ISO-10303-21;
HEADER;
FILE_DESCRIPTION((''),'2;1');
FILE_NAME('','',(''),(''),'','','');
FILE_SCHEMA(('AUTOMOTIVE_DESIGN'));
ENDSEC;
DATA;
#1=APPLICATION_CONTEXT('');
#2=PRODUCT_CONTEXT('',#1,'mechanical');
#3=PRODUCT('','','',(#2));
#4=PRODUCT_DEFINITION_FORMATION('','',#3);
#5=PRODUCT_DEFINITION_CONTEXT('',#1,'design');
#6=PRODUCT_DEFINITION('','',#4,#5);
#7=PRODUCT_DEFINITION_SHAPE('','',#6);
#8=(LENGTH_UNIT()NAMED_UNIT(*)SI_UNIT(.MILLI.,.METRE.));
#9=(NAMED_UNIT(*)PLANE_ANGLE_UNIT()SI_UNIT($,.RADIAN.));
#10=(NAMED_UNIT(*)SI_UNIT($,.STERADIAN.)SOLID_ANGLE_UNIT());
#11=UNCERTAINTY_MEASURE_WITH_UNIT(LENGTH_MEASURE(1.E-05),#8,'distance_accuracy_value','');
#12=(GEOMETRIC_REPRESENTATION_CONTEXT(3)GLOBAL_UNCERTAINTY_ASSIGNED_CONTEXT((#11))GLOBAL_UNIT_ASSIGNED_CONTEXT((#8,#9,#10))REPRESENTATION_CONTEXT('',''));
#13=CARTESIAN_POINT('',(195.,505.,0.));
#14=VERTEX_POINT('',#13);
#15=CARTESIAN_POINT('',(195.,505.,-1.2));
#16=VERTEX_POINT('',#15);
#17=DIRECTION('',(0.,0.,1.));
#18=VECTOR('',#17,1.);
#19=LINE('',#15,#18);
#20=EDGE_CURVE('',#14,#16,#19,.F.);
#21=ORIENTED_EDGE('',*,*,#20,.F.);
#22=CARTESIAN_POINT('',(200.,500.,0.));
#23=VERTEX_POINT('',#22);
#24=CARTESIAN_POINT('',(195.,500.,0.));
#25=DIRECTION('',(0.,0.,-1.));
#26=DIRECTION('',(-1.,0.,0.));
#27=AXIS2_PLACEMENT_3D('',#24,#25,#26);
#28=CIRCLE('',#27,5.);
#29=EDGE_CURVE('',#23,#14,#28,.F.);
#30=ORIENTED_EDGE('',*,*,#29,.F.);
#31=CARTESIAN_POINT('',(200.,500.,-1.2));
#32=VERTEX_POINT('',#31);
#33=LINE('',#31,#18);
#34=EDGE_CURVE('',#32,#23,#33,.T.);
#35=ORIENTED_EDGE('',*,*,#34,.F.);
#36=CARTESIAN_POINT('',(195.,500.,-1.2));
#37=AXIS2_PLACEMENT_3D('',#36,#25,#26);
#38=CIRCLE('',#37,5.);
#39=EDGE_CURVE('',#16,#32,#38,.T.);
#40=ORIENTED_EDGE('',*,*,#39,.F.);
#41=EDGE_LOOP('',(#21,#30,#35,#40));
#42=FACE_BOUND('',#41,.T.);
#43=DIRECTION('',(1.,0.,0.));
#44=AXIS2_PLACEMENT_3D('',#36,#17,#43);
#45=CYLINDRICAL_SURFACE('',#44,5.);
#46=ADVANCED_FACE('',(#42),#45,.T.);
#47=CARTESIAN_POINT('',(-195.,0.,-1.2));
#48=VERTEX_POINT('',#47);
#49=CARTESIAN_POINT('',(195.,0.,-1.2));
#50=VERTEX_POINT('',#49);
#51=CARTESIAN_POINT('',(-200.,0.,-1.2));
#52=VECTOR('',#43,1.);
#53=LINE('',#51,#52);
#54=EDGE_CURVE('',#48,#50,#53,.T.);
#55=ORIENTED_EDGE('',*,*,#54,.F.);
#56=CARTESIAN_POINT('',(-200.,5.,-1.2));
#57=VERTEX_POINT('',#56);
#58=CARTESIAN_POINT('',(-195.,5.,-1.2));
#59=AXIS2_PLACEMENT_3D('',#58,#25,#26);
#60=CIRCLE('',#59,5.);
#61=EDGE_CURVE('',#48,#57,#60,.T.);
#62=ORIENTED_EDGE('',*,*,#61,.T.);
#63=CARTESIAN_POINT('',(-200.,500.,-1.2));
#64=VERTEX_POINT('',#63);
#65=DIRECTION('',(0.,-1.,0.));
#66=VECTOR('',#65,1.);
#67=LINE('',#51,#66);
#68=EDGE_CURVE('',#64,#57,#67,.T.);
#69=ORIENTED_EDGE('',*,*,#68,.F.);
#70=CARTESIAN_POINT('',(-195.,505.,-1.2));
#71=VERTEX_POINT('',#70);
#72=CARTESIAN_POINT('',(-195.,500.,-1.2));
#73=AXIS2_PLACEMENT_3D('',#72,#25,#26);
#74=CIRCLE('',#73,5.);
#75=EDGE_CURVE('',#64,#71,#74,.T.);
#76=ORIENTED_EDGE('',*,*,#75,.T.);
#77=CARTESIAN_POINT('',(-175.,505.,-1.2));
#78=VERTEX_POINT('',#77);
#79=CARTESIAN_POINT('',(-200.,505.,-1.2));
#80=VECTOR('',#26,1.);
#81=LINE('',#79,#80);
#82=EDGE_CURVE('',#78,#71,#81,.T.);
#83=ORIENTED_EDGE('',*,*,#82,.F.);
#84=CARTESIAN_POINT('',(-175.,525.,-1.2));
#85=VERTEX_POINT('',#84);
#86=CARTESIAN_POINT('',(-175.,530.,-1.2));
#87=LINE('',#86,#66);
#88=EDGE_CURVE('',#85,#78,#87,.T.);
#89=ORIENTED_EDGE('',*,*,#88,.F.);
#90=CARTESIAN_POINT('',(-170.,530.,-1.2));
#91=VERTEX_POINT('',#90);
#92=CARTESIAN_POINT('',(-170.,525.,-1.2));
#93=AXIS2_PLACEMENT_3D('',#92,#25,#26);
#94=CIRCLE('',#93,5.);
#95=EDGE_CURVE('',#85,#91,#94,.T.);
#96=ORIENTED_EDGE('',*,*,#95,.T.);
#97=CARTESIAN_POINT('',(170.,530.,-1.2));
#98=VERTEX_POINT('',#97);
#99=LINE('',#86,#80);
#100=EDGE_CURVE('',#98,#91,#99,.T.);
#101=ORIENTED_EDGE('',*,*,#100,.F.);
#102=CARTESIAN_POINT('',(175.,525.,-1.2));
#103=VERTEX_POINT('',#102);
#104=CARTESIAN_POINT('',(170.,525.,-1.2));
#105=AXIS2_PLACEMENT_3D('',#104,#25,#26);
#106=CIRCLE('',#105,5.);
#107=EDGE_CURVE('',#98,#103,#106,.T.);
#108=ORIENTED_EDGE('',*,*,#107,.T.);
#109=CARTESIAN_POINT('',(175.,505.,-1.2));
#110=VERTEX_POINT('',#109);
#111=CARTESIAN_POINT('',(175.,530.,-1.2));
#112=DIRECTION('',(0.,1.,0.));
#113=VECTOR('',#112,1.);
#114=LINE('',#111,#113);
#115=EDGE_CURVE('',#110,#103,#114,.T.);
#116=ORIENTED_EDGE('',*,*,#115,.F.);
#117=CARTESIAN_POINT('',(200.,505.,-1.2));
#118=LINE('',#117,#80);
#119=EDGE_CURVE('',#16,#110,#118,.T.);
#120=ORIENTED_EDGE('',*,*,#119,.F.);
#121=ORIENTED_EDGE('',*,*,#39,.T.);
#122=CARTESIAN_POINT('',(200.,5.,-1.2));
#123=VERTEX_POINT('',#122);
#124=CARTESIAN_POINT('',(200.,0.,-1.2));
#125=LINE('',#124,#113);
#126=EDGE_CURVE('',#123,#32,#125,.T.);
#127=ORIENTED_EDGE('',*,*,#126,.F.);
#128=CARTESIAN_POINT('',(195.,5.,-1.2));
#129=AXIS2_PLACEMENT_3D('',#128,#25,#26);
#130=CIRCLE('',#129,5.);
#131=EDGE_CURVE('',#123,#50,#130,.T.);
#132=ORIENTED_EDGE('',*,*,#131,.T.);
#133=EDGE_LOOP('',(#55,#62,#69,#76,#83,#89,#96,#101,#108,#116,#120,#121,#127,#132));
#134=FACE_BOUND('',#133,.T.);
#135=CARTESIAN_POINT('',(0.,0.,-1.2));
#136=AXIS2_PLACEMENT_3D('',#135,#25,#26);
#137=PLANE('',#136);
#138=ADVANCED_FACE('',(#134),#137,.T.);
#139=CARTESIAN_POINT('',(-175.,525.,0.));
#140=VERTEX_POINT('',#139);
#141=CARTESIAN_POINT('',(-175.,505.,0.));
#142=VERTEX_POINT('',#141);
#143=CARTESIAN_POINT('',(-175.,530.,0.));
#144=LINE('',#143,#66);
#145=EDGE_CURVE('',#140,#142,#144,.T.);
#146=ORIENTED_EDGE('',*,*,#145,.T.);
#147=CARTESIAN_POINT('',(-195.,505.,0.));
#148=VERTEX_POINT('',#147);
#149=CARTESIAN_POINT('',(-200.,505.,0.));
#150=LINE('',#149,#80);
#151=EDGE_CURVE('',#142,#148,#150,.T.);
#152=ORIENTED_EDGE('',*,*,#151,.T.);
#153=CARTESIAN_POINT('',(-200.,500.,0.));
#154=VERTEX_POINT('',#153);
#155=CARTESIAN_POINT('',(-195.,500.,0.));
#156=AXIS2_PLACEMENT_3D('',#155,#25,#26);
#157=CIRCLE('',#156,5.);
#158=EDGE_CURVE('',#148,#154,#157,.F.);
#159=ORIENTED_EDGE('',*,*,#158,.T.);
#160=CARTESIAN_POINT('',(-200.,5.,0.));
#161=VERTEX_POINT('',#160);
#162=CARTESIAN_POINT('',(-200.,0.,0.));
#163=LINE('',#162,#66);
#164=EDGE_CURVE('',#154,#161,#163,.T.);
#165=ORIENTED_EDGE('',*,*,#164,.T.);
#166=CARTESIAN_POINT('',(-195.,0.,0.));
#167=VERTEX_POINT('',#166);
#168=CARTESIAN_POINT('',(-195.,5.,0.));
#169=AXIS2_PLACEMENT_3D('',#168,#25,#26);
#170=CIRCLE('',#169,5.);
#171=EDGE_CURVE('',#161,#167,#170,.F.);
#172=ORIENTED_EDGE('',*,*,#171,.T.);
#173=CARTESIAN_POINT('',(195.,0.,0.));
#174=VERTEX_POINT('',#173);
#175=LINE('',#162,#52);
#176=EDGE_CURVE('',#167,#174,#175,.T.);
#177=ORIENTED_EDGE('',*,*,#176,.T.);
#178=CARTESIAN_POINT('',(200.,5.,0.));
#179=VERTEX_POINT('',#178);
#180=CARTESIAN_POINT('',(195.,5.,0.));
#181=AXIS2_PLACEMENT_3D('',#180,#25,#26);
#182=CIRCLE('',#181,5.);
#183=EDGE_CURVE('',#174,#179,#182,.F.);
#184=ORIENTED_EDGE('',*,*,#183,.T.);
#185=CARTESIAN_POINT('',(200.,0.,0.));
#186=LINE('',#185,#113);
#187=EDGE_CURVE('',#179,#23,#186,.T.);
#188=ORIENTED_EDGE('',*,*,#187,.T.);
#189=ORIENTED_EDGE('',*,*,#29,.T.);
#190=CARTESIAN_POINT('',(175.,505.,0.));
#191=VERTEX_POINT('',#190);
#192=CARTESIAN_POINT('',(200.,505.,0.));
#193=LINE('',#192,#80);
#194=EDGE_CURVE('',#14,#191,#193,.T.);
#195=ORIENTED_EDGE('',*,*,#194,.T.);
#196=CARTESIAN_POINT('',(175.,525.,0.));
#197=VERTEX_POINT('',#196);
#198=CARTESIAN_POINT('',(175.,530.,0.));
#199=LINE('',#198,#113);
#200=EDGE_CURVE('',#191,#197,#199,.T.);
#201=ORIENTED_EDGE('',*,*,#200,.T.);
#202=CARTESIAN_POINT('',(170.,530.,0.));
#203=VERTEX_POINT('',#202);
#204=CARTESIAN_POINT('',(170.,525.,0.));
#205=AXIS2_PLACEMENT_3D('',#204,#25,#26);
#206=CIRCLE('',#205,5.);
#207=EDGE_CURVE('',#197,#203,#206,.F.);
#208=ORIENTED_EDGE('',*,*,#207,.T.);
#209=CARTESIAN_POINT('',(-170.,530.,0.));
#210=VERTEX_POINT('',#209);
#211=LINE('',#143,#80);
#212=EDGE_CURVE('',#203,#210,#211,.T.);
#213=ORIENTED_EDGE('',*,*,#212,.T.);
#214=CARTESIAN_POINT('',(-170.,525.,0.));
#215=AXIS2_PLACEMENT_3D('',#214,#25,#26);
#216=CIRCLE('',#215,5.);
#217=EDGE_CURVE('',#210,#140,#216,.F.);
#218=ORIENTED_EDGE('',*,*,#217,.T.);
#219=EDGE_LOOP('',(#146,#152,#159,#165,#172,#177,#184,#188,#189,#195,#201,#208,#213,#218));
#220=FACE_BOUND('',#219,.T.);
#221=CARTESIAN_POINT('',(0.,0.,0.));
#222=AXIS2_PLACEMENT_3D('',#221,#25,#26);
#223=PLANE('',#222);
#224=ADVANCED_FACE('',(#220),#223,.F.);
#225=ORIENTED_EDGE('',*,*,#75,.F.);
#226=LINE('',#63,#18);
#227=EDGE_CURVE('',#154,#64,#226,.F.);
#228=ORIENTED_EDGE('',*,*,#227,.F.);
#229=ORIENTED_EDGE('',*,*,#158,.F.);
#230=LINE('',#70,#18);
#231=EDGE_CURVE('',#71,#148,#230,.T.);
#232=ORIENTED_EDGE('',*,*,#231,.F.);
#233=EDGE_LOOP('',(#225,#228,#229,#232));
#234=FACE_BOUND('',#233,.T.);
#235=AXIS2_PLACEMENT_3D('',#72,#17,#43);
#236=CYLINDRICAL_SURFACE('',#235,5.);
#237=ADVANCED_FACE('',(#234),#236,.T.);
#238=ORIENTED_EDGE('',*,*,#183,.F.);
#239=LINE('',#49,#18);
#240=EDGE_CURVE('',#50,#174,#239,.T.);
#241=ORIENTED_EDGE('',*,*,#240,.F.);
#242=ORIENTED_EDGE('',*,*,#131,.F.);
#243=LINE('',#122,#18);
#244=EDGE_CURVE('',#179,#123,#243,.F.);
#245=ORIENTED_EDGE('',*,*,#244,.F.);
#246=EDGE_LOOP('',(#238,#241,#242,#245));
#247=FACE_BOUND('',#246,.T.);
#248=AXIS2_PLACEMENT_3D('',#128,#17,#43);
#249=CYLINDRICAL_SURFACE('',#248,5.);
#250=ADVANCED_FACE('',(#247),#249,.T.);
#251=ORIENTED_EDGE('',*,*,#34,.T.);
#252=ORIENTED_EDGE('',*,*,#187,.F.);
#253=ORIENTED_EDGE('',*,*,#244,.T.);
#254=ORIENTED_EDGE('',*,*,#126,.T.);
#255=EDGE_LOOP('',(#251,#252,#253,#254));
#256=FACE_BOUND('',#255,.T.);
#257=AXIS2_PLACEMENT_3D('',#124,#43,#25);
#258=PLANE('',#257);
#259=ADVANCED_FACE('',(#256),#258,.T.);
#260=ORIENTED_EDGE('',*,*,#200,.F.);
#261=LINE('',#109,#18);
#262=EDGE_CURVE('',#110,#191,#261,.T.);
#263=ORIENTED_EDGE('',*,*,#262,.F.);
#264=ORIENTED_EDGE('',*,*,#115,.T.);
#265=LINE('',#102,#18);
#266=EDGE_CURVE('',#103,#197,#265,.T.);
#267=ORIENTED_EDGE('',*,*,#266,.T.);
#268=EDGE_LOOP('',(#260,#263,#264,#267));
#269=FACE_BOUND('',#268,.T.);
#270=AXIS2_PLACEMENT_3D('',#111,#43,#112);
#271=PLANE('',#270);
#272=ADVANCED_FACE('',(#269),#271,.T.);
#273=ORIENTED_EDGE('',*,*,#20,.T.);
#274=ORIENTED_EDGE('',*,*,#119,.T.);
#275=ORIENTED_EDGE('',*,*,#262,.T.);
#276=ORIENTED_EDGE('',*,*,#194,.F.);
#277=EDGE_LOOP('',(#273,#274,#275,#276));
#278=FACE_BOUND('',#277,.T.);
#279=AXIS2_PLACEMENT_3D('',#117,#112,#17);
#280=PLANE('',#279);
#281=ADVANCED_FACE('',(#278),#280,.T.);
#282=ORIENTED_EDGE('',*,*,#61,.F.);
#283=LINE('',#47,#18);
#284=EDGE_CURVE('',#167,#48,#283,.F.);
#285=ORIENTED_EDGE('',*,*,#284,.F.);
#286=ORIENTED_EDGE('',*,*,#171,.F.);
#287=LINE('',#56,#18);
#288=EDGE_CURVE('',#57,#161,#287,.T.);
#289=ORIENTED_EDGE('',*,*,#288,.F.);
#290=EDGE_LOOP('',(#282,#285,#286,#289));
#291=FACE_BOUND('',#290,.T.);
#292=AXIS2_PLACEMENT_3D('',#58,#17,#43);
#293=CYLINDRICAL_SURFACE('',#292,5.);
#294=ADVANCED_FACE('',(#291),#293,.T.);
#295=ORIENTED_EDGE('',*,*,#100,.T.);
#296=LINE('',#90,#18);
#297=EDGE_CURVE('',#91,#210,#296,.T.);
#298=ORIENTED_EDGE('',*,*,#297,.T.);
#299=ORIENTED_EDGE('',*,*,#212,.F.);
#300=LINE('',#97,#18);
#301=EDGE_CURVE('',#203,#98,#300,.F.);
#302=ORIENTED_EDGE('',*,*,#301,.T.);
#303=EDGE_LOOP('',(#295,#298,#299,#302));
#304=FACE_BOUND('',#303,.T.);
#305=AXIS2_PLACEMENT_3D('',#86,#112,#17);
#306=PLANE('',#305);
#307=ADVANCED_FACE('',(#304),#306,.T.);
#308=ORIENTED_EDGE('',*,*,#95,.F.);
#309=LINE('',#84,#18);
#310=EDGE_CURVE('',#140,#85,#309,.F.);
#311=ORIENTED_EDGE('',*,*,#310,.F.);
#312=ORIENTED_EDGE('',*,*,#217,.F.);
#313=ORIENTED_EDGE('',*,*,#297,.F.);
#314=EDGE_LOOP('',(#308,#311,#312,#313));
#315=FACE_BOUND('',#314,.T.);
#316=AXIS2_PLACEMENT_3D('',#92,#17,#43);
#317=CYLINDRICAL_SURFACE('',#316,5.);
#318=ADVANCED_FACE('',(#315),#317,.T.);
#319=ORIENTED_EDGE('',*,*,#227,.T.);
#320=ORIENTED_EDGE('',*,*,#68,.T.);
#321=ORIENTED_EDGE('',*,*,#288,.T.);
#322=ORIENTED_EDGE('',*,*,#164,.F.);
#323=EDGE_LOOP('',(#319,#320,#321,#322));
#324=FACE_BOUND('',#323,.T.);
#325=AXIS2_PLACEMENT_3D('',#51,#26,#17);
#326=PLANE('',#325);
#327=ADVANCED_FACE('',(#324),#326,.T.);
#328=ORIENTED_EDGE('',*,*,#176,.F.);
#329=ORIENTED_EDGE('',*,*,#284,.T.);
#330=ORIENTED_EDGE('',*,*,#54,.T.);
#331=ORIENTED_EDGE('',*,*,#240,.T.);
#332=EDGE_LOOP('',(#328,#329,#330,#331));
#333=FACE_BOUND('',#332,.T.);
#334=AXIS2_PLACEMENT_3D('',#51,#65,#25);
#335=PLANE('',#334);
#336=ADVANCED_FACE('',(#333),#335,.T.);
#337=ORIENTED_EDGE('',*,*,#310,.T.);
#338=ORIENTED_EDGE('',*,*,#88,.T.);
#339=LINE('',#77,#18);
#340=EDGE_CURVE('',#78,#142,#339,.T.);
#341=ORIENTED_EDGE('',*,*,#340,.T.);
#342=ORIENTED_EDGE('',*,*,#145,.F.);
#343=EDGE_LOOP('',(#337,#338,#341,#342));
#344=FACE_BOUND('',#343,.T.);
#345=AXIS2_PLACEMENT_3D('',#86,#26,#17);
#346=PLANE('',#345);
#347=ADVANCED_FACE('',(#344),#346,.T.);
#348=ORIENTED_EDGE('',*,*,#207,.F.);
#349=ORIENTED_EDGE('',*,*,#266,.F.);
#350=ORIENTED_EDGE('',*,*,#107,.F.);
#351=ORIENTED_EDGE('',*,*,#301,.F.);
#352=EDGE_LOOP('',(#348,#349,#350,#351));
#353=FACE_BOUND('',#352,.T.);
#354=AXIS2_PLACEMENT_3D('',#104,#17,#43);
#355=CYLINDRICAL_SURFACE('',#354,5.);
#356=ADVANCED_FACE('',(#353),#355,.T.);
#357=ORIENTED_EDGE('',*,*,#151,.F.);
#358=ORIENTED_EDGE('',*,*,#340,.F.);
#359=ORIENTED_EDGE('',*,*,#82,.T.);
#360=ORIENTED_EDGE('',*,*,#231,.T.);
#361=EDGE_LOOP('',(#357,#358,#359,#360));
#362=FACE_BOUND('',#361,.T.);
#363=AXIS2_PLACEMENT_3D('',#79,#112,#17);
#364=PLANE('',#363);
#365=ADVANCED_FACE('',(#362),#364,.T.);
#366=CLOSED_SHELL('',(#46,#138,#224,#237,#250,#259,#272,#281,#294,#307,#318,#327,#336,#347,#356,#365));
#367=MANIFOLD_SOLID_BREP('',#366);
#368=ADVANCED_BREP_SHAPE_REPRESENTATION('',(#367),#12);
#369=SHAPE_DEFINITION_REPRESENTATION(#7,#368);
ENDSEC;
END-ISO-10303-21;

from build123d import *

# Parameters (mm, degrees)
TABAN_FLAN_1_DEPTH = 1.2
K_ELERI_START      = -1.2
K_ELERI_K_R1_DEPTH = 1.2


# Read off the part's stored shape, not the designer's step: Köşeleri kır1
# Sheet-metal steps are written as plain solids
with BuildPart() as part:
    # Çizim1 → Taban-Flanş1 (new body)
    with BuildSketch(Plane.XY):
        Polygon((-200, 0), (200, 0), (200, 505), (175, 505), (175, 530), (-175, 530), (-175, 505), (-200, 505), align=None)
    extrude(amount=-TABAN_FLAN_1_DEPTH)

    # Köşeleri kır1 outline → Köşeleri kır1 (cut)
    with BuildSketch(Plane.XY.offset(K_ELERI_START)):
        with BuildLine():
            ThreePointArc((200, 5), (198.535533906, 1.464466094), (195, 0))
            Line((195, 0), (200, 0))
            Line((200, 0), (200, 5))
        make_face()
        with BuildLine():
            Line((-200, 0), (-195, 0))
            ThreePointArc((-195, 0), (-198.535533906, 1.464466094), (-200, 5))
            Line((-200, 5), (-200, 0))
        make_face()
        with BuildLine():
            ThreePointArc((195, 505), (198.535533906, 503.535533906), (200, 500))
            Line((200, 500), (200, 505))
            Line((200, 505), (195, 505))
        make_face()
        with BuildLine():
            Line((-200, 505), (-200, 500))
            ThreePointArc((-200, 500), (-198.535533906, 503.535533906), (-195, 505))
            Line((-195, 505), (-200, 505))
        make_face()
        with BuildLine():
            ThreePointArc((170, 530), (173.535533906, 528.535533906), (175, 525))
            Line((175, 525), (175, 530))
            Line((175, 530), (170, 530))
        make_face()
        with BuildLine():
            Line((-175, 530), (-175, 525))
            ThreePointArc((-175, 525), (-173.535533906, 528.535533906), (-170, 530))
            Line((-170, 530), (-175, 530))
        make_face()
    extrude(amount=K_ELERI_K_R1_DEPTH, mode=Mode.SUBTRACT)


solid = part.part
